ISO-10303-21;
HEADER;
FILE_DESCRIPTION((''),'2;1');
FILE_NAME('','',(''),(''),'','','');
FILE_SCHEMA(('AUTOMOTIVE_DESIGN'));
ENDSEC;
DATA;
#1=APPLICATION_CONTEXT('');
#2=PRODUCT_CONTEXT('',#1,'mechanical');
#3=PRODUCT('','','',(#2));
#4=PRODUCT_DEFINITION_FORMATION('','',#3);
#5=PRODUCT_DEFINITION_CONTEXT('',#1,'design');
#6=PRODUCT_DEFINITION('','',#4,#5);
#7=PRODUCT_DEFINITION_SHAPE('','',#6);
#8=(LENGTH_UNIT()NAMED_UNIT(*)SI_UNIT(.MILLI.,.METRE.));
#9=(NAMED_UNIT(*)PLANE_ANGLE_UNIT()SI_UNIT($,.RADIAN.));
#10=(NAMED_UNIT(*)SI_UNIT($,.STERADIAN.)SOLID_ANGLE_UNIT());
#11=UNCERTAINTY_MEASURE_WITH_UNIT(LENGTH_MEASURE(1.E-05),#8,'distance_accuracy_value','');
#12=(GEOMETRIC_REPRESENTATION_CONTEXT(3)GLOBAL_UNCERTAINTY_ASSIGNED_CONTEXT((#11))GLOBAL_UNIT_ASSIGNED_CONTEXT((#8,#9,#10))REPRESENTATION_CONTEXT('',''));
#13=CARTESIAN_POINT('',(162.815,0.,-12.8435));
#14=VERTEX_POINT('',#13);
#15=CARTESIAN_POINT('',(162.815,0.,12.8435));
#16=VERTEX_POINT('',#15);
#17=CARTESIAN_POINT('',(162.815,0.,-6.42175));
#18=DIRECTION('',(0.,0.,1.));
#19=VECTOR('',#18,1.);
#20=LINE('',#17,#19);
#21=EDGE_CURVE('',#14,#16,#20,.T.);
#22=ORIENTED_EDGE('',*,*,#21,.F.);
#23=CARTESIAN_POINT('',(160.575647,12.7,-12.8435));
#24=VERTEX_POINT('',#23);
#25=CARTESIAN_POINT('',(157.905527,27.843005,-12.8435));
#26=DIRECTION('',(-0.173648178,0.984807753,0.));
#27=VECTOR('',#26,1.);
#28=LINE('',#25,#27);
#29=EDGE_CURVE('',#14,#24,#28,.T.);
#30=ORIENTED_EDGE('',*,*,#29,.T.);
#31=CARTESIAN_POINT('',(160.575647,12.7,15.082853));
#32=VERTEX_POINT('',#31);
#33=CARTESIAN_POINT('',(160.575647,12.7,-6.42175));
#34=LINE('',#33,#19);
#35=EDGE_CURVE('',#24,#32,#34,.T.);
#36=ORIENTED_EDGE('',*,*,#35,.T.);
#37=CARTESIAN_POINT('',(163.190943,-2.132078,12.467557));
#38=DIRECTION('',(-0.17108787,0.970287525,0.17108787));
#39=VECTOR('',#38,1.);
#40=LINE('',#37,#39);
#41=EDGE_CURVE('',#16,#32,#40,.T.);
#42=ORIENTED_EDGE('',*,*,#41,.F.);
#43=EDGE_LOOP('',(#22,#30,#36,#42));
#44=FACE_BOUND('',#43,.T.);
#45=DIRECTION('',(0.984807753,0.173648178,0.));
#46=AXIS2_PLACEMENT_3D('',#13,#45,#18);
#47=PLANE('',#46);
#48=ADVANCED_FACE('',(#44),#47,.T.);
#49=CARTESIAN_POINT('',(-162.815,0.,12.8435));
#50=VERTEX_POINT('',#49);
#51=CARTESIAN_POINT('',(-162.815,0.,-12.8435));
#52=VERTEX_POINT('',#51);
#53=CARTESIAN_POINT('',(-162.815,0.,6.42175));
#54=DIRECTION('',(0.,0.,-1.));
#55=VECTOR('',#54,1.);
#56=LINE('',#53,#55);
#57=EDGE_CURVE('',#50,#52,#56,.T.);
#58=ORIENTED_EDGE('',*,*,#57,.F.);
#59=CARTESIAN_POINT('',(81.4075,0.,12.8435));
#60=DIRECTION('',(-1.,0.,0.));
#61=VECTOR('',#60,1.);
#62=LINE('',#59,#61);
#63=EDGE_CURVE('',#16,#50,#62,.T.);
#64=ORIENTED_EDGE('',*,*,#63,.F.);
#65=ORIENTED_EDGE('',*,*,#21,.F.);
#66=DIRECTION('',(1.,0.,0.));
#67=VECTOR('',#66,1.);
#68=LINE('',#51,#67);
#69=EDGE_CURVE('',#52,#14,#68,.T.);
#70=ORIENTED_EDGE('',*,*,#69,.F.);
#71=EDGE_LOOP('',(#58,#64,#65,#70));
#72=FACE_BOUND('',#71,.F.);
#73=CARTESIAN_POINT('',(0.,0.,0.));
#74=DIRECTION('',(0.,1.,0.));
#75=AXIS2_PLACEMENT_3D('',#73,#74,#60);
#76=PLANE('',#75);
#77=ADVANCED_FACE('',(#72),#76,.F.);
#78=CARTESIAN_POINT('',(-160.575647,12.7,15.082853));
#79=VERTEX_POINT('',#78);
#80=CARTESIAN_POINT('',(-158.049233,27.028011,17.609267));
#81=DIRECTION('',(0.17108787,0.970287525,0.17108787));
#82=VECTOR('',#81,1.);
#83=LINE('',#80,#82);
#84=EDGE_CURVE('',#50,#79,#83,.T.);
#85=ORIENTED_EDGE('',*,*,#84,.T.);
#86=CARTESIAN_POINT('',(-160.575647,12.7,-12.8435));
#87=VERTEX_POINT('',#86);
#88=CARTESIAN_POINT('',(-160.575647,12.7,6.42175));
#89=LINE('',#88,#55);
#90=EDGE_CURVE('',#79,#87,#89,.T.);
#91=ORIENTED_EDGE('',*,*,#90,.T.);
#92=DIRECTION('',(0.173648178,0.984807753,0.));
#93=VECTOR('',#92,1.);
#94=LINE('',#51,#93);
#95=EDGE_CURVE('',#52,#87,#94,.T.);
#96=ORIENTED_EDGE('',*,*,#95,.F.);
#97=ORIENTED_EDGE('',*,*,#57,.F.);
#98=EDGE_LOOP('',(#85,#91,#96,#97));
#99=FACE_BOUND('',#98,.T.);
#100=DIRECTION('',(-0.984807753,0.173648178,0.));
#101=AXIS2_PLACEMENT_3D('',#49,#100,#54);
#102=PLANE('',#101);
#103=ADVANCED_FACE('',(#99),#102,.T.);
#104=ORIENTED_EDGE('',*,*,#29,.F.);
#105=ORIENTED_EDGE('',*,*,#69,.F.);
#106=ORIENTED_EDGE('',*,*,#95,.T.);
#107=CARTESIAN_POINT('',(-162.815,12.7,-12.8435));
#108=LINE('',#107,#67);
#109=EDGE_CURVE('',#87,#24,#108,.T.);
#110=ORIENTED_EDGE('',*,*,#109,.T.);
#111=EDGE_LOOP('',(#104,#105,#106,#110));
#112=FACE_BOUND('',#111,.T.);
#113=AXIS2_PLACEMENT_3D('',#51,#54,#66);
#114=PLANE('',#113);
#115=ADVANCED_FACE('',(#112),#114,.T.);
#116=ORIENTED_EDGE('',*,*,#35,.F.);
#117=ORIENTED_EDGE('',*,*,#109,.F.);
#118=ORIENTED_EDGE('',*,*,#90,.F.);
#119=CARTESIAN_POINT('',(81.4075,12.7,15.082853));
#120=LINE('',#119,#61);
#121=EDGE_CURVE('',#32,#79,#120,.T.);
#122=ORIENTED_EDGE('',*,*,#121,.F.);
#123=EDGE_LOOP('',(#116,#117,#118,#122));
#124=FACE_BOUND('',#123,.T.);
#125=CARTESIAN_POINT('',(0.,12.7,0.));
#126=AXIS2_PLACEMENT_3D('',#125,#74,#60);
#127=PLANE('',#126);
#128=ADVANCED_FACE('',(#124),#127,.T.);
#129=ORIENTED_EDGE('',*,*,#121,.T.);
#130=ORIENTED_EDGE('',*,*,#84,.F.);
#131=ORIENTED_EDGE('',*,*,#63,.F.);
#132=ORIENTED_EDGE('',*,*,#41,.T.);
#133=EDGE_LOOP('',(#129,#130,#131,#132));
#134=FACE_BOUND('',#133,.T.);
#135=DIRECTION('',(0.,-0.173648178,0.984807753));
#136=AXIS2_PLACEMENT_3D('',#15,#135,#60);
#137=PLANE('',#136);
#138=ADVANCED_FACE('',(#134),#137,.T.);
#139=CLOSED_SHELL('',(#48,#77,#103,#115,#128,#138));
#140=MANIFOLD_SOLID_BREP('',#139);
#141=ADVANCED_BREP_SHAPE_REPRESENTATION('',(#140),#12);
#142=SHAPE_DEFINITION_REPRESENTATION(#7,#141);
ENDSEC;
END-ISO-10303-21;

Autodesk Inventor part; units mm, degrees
ref_plane "YZ Plane" through (0, 0, 0) normal (1, 0, 0) x (0, 1, 0)
ref_plane "XZ Plane" through (0, 0, 0) normal (0, 1, 0) x (-1, 0, 0)
ref_plane "XY Plane" through (0, 0, 0) normal (0, 0, 1) x (1, 0, 0)
sketch "Sketch1" plane through (0, 0, 0) normal (0, 1, 0) x (-1, 0, 0)
  line L0 (162.815, -12.8435) -> (-162.815, -12.8435)
  line L1 (-162.815, -12.8435) -> (-162.815, 12.8435)
  line L2 (-162.815, 12.8435) -> (162.815, 12.8435)
  line L3 (162.815, 12.8435) -> (162.815, -12.8435)
  point P0 (0, 0)
  point P1 (162.815, 0)
  point P2 (0, -12.8435)
  dimension "d0" = 325.63
  dimension "d2" = 25.687
extrude "Extrusion1" add sketch "Sketch1" along normal blind 12.7
draft "FaceDraft1" angle -10 pull direction (0, -1, 0) faces at (162.815, 8.4667, -4.2812) fixed edges at (162.815, 0, 0)
draft "FaceDraft2" angle -10 pull direction (0, -1, 0) faces at (-162.815, 8.4667, 4.2812) fixed edges at (-162.815, 0, 0)
draft "FaceDraft3" angle 10 pull direction (0, -1, 0) faces at (53.5252, 4.2333, 12.8435) fixed edges at (0, 0, 12.8435)
properties part number "Panel_front"
